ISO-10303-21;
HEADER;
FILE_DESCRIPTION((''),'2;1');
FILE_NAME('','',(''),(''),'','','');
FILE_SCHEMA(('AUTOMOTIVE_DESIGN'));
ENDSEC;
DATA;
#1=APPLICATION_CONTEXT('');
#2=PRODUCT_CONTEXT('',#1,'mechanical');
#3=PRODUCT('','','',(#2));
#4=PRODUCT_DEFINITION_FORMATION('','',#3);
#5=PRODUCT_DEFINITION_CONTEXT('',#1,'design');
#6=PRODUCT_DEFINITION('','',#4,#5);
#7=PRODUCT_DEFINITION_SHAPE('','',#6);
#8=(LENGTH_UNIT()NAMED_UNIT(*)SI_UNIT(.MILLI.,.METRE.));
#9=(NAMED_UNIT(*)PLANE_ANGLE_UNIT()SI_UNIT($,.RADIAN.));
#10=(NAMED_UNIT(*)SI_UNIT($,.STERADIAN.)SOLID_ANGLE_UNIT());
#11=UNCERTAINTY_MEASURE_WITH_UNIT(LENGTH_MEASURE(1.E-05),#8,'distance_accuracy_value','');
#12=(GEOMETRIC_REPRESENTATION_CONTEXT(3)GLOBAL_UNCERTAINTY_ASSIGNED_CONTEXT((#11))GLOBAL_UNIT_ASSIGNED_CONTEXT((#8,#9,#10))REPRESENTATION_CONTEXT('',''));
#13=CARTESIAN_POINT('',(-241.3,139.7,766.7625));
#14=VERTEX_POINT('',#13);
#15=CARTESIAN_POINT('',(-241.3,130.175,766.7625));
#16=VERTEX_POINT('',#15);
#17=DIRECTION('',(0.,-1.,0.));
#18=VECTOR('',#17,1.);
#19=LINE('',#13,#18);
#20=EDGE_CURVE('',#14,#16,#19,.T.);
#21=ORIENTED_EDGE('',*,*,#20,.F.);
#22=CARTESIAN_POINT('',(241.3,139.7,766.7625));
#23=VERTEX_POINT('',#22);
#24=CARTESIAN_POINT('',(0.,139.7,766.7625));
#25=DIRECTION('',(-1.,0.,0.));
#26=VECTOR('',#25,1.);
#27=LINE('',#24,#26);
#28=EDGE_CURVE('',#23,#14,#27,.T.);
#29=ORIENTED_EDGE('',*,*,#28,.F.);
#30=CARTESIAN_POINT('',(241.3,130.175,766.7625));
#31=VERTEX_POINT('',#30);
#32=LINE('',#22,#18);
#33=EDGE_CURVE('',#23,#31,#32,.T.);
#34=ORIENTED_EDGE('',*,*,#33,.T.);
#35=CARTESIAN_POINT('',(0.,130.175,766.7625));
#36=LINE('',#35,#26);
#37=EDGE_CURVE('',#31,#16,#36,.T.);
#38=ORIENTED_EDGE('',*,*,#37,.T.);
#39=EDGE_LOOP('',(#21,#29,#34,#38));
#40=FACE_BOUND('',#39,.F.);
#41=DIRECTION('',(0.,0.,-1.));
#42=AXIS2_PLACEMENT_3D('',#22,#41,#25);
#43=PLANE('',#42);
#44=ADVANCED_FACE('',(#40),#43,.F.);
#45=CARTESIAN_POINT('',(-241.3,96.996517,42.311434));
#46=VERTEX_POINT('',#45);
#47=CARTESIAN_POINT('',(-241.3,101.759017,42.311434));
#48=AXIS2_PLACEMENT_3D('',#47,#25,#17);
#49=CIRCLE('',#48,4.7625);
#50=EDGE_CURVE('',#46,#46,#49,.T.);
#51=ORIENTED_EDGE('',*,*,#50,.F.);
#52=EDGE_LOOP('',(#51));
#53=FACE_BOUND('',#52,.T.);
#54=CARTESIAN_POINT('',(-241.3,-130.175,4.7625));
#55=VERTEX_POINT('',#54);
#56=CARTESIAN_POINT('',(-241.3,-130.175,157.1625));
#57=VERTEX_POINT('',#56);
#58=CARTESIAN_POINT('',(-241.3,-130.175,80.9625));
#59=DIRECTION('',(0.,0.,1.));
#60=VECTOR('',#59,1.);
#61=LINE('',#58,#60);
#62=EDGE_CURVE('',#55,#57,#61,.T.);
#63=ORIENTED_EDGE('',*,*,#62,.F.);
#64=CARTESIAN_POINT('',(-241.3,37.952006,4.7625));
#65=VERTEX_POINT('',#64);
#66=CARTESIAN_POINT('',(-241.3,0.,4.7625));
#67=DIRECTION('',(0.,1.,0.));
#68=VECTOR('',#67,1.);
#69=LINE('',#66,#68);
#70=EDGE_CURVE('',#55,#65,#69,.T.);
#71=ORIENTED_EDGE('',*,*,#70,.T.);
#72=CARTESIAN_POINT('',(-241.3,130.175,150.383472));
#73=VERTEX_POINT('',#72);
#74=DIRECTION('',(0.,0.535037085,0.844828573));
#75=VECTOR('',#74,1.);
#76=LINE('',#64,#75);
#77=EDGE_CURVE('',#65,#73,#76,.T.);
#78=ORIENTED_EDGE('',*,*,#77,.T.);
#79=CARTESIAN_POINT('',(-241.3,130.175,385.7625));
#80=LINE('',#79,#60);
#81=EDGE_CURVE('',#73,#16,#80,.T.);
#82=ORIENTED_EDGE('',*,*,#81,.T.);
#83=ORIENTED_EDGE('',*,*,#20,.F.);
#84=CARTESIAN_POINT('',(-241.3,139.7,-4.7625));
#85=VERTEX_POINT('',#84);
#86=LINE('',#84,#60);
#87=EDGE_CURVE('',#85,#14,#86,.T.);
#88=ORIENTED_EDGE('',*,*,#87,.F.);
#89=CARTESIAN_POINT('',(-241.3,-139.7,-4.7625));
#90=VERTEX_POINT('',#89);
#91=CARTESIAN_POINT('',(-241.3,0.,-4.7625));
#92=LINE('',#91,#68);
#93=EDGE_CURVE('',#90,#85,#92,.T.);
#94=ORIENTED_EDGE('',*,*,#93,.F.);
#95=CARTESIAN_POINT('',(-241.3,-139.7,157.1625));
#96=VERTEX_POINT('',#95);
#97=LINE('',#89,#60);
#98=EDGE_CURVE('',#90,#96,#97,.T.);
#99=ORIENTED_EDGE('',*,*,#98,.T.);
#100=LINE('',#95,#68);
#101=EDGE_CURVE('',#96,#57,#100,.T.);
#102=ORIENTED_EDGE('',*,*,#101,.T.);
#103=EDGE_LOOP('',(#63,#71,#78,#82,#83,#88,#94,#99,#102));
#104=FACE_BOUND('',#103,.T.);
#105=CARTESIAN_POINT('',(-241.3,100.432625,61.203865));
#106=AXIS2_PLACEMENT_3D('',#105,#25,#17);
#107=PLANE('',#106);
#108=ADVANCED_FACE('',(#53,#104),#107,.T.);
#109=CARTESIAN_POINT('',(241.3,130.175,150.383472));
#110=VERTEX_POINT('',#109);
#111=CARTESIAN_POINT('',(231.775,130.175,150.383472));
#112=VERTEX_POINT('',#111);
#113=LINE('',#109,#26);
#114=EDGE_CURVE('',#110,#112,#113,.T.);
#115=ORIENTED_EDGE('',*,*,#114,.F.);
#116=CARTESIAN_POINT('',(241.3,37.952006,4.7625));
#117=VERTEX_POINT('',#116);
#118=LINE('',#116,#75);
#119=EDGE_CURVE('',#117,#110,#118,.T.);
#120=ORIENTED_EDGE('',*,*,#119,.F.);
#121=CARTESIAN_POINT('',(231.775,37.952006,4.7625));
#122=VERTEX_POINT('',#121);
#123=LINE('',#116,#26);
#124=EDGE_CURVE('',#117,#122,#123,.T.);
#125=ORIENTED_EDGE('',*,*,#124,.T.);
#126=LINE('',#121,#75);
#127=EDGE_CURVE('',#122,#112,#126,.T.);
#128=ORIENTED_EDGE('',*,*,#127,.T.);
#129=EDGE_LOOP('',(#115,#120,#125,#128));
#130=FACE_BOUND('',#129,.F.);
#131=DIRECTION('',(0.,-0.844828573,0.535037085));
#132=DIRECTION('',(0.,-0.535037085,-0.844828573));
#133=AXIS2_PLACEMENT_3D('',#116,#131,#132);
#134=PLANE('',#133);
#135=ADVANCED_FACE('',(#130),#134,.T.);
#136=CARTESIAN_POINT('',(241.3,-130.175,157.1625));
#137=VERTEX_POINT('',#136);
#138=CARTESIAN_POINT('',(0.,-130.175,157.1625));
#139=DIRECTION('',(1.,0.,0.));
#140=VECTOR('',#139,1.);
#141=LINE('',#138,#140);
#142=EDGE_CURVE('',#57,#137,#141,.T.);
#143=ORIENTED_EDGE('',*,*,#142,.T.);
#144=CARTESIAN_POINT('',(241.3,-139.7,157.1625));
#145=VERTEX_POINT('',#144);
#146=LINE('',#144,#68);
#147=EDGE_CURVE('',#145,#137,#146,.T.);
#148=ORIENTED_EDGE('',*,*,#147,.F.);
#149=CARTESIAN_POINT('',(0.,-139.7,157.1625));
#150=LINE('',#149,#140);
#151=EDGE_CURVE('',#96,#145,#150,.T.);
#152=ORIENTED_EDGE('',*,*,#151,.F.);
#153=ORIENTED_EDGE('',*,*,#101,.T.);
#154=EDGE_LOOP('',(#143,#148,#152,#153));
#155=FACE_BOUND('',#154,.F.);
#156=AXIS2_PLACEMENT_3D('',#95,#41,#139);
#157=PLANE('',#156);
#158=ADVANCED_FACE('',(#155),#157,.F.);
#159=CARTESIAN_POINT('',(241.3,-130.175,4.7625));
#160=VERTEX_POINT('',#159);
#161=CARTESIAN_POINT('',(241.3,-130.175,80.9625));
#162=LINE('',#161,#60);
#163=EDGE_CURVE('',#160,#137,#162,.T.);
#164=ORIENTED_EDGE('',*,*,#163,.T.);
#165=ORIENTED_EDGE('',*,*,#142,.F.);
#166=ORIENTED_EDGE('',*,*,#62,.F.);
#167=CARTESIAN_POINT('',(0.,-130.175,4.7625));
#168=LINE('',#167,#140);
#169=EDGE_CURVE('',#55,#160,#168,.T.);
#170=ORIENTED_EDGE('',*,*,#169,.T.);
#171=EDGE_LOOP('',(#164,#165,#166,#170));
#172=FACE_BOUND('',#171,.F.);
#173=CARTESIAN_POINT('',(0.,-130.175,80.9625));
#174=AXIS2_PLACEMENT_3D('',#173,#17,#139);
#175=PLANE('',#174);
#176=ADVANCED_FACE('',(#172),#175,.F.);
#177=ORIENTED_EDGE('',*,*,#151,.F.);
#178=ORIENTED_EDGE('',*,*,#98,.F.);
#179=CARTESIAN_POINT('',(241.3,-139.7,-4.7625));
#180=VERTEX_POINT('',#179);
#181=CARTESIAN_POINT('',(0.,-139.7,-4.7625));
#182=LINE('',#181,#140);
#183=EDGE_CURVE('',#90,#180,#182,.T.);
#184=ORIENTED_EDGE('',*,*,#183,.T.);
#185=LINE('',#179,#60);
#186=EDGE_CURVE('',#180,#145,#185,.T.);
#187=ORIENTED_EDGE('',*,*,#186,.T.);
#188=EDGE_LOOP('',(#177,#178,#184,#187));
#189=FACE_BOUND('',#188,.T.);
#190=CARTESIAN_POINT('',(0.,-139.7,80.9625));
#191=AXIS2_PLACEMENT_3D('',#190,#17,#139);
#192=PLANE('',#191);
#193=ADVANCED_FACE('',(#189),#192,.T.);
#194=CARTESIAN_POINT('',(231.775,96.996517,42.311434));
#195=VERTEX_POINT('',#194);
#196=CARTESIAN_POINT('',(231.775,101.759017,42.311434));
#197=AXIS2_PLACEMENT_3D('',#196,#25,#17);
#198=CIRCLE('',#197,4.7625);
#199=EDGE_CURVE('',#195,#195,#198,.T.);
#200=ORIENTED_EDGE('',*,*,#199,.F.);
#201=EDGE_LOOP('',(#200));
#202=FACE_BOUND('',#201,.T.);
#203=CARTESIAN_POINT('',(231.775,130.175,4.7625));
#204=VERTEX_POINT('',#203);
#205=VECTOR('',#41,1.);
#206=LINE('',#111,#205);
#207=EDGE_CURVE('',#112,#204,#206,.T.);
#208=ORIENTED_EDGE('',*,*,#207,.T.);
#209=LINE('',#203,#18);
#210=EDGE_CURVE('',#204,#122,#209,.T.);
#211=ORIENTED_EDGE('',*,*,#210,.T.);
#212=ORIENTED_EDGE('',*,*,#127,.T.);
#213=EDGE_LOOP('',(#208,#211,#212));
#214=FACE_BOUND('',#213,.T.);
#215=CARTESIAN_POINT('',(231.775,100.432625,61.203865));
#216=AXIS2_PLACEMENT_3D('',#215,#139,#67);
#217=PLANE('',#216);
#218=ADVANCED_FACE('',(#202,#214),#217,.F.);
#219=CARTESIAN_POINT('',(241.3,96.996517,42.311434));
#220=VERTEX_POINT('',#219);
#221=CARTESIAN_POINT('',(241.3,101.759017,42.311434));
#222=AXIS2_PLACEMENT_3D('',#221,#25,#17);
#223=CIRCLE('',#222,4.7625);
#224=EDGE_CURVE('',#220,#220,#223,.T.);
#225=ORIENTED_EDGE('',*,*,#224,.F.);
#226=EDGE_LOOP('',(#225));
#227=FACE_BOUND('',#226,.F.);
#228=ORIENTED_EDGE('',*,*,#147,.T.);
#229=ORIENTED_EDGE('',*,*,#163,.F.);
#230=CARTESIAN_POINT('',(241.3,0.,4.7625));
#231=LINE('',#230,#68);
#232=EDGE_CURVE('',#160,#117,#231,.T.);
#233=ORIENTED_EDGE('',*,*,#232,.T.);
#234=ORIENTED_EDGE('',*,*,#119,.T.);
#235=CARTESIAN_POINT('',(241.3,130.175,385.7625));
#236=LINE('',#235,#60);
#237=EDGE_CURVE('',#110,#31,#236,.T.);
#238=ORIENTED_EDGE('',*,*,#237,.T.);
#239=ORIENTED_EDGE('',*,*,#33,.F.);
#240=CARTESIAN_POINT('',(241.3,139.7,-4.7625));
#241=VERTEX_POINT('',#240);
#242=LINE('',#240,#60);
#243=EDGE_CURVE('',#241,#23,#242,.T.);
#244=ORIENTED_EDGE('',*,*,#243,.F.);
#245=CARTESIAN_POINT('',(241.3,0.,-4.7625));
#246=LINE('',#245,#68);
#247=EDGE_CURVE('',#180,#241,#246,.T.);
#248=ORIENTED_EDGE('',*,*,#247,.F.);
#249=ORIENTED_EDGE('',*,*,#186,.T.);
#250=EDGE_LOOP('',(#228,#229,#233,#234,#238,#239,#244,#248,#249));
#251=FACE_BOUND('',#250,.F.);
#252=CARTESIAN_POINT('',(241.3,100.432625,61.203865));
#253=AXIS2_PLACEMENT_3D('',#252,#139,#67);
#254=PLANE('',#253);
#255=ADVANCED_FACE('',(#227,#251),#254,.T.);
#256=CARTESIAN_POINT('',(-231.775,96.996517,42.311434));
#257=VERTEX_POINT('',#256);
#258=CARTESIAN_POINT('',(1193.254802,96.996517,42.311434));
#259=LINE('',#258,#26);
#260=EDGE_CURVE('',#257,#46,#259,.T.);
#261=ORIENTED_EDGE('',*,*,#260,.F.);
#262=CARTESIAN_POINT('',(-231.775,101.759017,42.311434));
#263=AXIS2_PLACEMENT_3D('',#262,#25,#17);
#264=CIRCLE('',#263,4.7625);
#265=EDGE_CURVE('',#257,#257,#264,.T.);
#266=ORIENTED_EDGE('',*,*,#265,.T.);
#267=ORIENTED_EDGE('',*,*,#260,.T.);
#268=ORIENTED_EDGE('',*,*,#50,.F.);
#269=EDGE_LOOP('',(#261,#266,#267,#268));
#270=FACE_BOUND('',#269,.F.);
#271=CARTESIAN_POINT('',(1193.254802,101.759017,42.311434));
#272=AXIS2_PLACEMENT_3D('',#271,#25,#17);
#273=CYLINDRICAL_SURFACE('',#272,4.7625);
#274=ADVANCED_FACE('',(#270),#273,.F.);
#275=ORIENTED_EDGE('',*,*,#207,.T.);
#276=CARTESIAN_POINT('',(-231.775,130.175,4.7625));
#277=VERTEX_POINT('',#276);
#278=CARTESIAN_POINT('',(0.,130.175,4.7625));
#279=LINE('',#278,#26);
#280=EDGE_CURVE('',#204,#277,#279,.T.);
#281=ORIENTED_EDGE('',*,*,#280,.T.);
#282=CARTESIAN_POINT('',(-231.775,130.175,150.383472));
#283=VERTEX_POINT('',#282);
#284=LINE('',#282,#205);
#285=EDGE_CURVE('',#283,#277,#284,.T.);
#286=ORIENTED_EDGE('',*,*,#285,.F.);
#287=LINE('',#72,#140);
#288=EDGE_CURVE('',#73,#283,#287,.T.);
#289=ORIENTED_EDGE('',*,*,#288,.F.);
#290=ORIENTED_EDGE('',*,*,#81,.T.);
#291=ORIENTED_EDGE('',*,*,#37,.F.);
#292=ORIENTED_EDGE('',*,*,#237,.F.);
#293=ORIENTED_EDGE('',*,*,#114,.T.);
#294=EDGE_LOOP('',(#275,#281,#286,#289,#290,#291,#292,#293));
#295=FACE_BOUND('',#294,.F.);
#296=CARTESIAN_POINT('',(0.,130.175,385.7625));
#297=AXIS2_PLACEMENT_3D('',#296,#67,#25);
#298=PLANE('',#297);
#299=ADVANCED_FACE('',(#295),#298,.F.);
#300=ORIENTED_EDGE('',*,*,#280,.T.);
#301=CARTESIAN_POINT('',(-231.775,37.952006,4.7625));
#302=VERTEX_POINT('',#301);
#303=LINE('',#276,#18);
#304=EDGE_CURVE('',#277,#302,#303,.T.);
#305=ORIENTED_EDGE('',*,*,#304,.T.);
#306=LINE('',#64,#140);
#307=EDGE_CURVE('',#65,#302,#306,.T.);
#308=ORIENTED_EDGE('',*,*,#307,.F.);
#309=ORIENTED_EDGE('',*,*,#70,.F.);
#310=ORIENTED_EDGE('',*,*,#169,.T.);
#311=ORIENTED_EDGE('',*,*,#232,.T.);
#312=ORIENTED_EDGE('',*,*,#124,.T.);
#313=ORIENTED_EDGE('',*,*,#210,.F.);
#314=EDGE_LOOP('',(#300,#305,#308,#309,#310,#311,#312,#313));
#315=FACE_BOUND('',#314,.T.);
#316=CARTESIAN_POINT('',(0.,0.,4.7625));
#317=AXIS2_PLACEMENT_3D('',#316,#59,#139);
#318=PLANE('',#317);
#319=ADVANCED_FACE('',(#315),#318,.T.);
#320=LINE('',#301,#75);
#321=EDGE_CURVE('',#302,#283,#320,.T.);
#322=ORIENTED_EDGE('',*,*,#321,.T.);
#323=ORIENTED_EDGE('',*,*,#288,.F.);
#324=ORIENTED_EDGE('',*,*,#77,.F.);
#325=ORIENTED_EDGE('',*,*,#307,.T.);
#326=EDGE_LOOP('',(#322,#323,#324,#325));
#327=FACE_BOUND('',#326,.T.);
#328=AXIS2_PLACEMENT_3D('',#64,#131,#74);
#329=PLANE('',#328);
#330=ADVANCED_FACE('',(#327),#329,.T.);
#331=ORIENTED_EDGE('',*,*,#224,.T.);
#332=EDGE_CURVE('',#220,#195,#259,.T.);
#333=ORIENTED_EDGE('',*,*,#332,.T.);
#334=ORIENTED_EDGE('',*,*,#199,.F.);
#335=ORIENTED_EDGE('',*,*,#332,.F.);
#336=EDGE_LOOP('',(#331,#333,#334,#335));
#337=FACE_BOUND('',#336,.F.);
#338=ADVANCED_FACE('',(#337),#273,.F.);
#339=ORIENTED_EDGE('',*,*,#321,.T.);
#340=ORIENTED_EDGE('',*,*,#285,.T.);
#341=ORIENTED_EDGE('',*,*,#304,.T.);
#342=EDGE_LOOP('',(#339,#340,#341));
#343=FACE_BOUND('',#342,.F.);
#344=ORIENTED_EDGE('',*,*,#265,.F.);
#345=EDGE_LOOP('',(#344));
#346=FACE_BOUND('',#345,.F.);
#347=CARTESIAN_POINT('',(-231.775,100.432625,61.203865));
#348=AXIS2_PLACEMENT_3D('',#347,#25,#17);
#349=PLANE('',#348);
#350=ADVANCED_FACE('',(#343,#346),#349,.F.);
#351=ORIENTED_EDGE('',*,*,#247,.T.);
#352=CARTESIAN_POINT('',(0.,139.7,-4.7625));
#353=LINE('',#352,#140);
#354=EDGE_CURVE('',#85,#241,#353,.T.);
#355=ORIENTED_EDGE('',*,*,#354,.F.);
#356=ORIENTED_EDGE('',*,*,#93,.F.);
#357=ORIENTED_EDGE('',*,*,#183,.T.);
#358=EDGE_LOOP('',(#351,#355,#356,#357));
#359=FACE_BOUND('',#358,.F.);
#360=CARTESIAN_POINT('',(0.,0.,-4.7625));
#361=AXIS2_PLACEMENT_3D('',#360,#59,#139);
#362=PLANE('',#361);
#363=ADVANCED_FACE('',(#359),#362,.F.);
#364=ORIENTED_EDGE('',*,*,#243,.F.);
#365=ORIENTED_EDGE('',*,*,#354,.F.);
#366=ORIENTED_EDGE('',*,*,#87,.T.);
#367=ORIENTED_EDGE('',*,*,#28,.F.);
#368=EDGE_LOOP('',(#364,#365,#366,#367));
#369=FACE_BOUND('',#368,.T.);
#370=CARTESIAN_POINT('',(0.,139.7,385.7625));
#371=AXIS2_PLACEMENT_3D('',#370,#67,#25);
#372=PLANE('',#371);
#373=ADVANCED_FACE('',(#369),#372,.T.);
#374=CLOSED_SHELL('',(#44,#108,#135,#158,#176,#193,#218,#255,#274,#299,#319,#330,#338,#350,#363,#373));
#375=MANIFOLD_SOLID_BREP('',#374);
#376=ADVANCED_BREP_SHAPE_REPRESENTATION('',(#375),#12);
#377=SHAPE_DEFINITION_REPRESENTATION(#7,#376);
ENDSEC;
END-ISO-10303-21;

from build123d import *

# Parameters (mm, degrees)
F0_W     = 482.6
F0_H     = 279.4
F1_DEPTH = 4.7625
F2_W     = 482.6
F2_H     = 762
F3_DEPTH = 9.525
F4_W     = 482.6
F4_H     = 152.4
F5_DEPTH = 9.525
F7_DEPTH = 9.525
F9_D     = 9.525


# Not quite as in the source:
# - a pattern or mirror of a feature is missing from the dataset's text; its kind, count and spacing are read off the source's solid


with BuildPart() as f1:
    # F0 (on Top) → F1 (new body, symmetric)
    with BuildSketch(Plane.XY):
        Rectangle(F0_W, F0_H)
    extrude(amount=F1_DEPTH, both=True)

    # F2 (on face) → F3 (join)
    with BuildSketch(Plane(origin=(0, 139.7, 0), x_dir=(-1, 0, 0), z_dir=(0, 1, 0))):
        with Locations((0, 385.7625)):
            Rectangle(F2_W, F2_H)
    extrude(amount=-F3_DEPTH)

    # F4 (on face) → F5 (join)
    with BuildSketch(Plane.XZ.offset(139.7)):
        with Locations((0, 80.9625)):
            Rectangle(F4_W, F4_H)
    extrude(amount=-F5_DEPTH)

    # F6 (on face) → F7 (join)
    with BuildSketch(Plane(origin=(-241.3, 0, 0), x_dir=(0, -1, 0), z_dir=(-1, 0, 0))):
        Polygon((-37.9520058632, 4.7625), (-130.175, 150.3834724426), (-130.175, 4.7625), align=None)
    f7 = extrude(amount=-F7_DEPTH)

    # F7_copies: F7 across plane
    add(f7.mirror(Plane(origin=(0, 0, 0), x_dir=(0, 0, 1), z_dir=(1, 0, 0))))

    # F9 (through all)
    with Locations(Plane.YZ.offset(241.3)):
        with Locations((101.7590165138, 42.3114337027)):
            Hole(F9_D / 2)


solid = f1.part
